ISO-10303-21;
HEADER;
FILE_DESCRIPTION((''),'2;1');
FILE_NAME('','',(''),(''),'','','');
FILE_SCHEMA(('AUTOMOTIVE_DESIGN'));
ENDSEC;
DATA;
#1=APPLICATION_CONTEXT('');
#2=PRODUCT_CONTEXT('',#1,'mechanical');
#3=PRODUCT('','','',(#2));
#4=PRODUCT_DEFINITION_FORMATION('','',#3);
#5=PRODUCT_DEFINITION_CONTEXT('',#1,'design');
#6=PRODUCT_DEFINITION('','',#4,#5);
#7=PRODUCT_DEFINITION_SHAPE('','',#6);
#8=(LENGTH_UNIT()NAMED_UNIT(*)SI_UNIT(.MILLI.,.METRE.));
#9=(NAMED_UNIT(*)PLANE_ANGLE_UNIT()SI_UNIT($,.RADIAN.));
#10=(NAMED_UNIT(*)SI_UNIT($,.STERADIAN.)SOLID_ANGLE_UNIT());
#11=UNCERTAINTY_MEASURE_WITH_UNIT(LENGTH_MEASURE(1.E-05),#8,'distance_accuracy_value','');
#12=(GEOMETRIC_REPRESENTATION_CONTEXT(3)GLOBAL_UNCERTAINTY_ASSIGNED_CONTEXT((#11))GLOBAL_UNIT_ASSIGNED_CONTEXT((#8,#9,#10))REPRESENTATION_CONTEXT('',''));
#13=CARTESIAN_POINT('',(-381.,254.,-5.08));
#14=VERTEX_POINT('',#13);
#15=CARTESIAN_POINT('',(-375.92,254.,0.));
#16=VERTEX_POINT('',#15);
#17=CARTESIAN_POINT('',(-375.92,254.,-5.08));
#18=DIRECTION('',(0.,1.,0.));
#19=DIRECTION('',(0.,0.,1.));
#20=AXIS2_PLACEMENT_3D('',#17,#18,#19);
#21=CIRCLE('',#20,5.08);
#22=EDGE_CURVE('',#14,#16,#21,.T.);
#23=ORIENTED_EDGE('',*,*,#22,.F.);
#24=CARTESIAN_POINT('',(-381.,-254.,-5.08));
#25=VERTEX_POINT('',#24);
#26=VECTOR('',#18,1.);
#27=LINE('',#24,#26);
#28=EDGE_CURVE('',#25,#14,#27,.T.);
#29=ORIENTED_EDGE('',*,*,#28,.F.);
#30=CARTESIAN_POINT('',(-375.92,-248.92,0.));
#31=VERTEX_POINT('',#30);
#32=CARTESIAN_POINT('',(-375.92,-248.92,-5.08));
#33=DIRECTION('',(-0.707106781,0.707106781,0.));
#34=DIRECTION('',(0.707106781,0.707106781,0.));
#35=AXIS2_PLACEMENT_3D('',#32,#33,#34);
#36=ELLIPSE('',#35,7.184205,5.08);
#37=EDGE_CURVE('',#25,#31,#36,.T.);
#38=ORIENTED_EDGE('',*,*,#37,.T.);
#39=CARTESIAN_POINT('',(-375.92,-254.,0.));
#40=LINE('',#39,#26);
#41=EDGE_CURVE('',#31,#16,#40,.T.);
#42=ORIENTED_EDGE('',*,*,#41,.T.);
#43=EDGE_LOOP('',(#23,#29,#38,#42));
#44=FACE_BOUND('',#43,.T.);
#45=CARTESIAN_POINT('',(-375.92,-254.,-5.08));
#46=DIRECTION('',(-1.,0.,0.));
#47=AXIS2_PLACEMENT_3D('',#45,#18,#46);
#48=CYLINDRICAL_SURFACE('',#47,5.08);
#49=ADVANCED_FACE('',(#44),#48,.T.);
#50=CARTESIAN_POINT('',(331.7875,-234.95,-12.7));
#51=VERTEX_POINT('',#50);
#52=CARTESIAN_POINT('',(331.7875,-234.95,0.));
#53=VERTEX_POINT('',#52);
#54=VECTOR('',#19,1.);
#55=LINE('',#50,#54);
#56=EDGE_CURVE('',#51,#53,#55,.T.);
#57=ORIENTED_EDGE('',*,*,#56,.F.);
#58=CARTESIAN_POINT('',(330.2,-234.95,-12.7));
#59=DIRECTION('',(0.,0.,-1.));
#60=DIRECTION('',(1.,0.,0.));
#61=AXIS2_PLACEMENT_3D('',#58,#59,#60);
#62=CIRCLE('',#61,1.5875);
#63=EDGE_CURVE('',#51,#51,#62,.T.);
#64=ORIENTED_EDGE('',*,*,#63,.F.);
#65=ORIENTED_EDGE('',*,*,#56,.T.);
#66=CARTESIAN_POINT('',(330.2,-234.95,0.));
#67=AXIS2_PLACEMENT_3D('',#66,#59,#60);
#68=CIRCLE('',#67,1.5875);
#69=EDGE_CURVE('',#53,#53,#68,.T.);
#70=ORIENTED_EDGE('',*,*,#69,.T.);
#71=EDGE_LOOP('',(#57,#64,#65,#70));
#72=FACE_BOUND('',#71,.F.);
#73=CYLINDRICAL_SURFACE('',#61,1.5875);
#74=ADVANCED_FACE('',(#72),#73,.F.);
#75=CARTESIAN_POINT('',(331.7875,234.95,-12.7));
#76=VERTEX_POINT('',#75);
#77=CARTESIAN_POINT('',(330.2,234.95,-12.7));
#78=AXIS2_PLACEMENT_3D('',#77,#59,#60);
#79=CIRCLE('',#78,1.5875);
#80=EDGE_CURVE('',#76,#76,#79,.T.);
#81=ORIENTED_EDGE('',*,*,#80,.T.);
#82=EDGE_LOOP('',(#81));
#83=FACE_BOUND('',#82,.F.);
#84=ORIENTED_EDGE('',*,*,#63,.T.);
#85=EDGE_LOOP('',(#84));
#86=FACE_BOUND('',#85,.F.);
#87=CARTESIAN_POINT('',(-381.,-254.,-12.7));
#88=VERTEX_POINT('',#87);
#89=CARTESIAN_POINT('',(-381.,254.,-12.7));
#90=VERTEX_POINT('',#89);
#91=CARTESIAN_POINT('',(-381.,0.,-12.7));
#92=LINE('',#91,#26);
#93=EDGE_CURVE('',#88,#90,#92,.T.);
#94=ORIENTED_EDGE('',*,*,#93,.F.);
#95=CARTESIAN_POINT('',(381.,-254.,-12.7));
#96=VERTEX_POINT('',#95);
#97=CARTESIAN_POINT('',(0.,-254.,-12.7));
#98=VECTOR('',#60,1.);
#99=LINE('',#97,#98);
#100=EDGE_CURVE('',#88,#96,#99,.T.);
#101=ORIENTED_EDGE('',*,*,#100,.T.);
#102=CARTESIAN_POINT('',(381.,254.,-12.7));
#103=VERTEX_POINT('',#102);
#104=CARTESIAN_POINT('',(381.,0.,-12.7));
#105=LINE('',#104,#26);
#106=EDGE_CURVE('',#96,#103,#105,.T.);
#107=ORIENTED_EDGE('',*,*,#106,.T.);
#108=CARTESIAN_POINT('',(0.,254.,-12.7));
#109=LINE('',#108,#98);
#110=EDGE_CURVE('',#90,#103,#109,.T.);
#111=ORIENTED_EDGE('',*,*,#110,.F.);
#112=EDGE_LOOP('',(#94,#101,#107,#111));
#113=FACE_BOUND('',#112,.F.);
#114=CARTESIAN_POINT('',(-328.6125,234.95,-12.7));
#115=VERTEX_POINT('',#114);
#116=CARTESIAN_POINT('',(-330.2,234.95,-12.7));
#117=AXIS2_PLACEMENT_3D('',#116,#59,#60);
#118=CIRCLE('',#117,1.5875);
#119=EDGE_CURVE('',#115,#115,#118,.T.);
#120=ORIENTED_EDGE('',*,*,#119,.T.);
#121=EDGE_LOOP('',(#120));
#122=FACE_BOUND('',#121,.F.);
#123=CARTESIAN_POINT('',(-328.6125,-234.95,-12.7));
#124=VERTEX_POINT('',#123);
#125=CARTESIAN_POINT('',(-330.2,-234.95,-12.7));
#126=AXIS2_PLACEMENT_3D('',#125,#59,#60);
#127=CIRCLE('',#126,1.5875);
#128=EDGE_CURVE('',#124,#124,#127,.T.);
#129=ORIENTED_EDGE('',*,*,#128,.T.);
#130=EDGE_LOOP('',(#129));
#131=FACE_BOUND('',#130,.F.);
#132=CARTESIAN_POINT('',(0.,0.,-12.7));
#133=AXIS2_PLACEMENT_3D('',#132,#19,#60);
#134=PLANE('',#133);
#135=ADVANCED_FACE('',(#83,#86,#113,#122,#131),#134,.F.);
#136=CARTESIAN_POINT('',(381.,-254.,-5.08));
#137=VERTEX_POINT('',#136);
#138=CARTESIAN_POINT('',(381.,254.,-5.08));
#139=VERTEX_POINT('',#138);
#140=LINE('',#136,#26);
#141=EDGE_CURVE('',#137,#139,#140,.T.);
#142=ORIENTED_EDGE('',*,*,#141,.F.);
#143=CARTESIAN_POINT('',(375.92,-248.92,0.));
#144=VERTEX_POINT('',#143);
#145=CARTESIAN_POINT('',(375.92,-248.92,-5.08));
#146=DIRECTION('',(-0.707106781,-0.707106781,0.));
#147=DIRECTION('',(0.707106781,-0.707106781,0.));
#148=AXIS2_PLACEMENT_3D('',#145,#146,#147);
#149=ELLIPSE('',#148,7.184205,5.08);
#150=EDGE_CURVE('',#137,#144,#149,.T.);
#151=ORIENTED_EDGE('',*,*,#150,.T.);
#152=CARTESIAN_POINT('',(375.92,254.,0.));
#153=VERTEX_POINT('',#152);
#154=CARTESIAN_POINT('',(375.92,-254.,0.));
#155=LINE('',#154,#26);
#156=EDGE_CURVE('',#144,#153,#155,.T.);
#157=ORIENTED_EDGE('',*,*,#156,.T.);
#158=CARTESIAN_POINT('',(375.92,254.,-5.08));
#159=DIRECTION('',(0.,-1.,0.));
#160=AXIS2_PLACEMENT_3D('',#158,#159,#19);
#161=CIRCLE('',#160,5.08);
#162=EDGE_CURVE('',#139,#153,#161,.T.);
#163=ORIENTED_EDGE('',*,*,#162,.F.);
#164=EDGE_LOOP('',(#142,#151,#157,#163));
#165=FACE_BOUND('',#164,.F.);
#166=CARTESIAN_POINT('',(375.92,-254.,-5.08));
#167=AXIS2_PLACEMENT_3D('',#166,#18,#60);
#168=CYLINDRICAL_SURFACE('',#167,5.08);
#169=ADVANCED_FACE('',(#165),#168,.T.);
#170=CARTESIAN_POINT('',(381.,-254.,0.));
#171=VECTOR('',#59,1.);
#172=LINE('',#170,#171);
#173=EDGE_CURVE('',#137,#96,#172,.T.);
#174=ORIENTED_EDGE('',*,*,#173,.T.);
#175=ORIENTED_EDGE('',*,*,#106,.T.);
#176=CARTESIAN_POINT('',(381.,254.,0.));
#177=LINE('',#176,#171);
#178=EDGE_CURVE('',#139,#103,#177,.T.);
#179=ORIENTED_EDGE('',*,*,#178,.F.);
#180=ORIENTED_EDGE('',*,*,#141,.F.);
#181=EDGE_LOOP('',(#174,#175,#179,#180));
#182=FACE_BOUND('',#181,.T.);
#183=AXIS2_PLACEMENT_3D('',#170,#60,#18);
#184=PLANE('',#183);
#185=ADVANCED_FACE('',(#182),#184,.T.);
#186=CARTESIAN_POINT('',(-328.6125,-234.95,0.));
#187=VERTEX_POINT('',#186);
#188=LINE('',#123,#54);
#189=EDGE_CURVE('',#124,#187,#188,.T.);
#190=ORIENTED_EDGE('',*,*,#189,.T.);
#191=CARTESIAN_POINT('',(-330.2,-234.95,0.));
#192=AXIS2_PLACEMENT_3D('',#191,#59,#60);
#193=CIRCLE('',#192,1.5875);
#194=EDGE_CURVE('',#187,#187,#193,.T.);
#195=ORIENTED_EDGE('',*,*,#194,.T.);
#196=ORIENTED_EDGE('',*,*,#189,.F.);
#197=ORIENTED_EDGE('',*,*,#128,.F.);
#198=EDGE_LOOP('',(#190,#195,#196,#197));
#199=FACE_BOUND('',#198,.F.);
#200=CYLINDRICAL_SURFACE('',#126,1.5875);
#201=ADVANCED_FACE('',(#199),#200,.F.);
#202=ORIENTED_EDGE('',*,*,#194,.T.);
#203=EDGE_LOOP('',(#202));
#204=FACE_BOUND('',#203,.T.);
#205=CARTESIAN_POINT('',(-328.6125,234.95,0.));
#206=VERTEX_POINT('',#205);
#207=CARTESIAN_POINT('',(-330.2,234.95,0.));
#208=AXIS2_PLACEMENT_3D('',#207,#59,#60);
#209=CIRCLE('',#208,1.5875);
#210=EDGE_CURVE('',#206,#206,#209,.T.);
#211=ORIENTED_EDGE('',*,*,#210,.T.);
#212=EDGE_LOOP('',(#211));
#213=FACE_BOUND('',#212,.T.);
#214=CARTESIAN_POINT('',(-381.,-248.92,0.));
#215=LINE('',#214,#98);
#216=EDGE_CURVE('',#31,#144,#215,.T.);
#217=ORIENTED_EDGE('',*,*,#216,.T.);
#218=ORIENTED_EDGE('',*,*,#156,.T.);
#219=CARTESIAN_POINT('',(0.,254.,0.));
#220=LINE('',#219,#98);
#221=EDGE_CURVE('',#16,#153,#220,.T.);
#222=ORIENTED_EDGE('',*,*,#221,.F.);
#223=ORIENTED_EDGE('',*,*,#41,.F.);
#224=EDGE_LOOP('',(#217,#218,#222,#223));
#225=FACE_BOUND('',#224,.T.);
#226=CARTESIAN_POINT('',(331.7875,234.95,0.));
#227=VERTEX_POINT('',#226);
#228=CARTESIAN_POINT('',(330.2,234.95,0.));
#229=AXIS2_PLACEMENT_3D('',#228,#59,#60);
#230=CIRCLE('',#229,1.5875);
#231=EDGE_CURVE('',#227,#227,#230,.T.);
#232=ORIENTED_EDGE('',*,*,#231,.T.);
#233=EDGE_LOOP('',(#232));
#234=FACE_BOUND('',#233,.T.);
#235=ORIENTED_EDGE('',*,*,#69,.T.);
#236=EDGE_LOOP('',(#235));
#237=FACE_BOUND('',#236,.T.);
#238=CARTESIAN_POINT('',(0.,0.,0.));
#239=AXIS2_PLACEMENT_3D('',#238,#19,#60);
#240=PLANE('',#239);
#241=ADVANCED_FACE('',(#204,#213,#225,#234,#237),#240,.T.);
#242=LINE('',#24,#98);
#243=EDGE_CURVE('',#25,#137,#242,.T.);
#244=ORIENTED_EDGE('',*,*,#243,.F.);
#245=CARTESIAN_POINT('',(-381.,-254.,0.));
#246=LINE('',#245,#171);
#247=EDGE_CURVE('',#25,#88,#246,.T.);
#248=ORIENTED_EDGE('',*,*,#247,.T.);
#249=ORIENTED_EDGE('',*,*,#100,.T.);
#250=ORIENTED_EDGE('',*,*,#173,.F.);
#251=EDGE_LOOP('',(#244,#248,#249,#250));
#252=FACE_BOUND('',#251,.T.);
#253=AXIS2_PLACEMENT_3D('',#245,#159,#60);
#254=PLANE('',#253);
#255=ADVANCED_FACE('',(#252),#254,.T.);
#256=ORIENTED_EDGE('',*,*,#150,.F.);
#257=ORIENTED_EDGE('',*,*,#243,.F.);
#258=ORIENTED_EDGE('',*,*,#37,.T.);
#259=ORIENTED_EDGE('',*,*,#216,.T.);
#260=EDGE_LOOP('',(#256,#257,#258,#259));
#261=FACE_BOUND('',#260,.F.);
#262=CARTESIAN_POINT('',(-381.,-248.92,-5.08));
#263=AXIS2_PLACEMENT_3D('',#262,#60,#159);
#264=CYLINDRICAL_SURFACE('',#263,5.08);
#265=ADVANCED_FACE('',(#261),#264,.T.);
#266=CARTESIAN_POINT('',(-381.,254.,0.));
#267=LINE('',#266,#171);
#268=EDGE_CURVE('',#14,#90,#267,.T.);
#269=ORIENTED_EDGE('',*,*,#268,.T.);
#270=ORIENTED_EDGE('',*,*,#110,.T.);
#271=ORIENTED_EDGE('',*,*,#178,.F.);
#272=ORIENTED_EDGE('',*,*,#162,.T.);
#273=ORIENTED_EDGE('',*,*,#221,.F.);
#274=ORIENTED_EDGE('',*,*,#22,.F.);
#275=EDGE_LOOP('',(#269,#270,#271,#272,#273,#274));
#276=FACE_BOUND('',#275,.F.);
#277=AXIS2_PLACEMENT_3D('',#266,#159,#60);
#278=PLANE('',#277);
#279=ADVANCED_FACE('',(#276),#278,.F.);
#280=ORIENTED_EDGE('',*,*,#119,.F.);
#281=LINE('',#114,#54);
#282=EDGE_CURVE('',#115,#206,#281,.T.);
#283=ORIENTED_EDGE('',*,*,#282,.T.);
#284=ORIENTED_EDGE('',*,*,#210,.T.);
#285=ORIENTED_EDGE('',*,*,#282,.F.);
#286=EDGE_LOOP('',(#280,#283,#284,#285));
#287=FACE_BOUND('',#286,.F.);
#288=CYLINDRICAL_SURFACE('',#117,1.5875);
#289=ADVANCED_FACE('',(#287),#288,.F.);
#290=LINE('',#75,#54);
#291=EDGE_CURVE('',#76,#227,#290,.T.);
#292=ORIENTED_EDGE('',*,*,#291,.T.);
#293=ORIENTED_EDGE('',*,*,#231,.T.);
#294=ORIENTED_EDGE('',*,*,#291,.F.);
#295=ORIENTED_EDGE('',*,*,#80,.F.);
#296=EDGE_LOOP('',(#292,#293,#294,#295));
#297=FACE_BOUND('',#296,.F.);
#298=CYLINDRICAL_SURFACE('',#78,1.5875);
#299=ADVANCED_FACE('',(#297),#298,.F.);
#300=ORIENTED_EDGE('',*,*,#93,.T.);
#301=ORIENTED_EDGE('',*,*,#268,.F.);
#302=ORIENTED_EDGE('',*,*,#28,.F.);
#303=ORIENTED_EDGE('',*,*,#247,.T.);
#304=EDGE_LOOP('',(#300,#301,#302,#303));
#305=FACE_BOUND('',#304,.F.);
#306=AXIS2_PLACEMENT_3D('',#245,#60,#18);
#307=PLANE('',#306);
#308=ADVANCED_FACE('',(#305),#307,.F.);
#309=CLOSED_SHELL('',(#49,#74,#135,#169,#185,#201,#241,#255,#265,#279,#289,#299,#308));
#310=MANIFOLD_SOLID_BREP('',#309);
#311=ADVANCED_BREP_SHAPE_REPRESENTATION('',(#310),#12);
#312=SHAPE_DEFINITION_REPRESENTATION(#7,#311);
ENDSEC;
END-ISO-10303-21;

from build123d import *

# Parameters (mm, degrees)
F0_W      = 762
F0_H      = 508
F1_DEPTH  = 12.7
F2_R      = 5.08
F3_R      = 1.5875
F4_DEPTH  = 12.7
F5_R      = 1.5875
F6_DEPTH  = 12.7
F7_R      = 1.5875
F8_DEPTH  = 12.7
F9_R      = 1.5875
F10_DEPTH = 12.7


with BuildPart() as f1:
    # F0 (on Top) → F1 (new body)
    with BuildSketch(Plane.XY):
        Rectangle(F0_W, F0_H)
    extrude(amount=-F1_DEPTH)

    # F2
    f2_edges = [f1.edges().sort_by_distance(p)[0] for p in [
        (0, -254, 0),
        (381, 0, 0),
        (-381, 0, 0),
    ]]
    fillet(f2_edges, radius=F2_R)

    # F3 (on face) → F4 (cut, through all)
    with BuildSketch(Plane(origin=(0, 0, -12.7), x_dir=(1, 0, 0), z_dir=(0, 0, -1))):
        with Locations((330.2, 234.95)):
            Circle(F3_R)
    extrude(amount=-F4_DEPTH, mode=Mode.SUBTRACT)

    # F5 (on face) → F6 (cut, through all)
    with BuildSketch(Plane(origin=(0, 0, -12.7), x_dir=(1, 0, 0), z_dir=(0, 0, -1))):
        with Locations((-330.2, 234.95)):
            Circle(F5_R)
    extrude(amount=-F6_DEPTH, mode=Mode.SUBTRACT)

    # F7 (on face) → F8 (cut, through all)
    with BuildSketch(Plane(origin=(0, 0, -12.7), x_dir=(1, 0, 0), z_dir=(0, 0, -1))):
        with Locations((330.2, -234.95)):
            Circle(F7_R)
    extrude(amount=-F8_DEPTH, mode=Mode.SUBTRACT)

    # F9 (on face) → F10 (cut, through all)
    with BuildSketch(Plane(origin=(0, 0, -12.7), x_dir=(1, 0, 0), z_dir=(0, 0, -1))):
        with Locations((-330.2, -234.95)):
            Circle(F9_R)
    extrude(amount=-F10_DEPTH, mode=Mode.SUBTRACT)


solid = f1.part
